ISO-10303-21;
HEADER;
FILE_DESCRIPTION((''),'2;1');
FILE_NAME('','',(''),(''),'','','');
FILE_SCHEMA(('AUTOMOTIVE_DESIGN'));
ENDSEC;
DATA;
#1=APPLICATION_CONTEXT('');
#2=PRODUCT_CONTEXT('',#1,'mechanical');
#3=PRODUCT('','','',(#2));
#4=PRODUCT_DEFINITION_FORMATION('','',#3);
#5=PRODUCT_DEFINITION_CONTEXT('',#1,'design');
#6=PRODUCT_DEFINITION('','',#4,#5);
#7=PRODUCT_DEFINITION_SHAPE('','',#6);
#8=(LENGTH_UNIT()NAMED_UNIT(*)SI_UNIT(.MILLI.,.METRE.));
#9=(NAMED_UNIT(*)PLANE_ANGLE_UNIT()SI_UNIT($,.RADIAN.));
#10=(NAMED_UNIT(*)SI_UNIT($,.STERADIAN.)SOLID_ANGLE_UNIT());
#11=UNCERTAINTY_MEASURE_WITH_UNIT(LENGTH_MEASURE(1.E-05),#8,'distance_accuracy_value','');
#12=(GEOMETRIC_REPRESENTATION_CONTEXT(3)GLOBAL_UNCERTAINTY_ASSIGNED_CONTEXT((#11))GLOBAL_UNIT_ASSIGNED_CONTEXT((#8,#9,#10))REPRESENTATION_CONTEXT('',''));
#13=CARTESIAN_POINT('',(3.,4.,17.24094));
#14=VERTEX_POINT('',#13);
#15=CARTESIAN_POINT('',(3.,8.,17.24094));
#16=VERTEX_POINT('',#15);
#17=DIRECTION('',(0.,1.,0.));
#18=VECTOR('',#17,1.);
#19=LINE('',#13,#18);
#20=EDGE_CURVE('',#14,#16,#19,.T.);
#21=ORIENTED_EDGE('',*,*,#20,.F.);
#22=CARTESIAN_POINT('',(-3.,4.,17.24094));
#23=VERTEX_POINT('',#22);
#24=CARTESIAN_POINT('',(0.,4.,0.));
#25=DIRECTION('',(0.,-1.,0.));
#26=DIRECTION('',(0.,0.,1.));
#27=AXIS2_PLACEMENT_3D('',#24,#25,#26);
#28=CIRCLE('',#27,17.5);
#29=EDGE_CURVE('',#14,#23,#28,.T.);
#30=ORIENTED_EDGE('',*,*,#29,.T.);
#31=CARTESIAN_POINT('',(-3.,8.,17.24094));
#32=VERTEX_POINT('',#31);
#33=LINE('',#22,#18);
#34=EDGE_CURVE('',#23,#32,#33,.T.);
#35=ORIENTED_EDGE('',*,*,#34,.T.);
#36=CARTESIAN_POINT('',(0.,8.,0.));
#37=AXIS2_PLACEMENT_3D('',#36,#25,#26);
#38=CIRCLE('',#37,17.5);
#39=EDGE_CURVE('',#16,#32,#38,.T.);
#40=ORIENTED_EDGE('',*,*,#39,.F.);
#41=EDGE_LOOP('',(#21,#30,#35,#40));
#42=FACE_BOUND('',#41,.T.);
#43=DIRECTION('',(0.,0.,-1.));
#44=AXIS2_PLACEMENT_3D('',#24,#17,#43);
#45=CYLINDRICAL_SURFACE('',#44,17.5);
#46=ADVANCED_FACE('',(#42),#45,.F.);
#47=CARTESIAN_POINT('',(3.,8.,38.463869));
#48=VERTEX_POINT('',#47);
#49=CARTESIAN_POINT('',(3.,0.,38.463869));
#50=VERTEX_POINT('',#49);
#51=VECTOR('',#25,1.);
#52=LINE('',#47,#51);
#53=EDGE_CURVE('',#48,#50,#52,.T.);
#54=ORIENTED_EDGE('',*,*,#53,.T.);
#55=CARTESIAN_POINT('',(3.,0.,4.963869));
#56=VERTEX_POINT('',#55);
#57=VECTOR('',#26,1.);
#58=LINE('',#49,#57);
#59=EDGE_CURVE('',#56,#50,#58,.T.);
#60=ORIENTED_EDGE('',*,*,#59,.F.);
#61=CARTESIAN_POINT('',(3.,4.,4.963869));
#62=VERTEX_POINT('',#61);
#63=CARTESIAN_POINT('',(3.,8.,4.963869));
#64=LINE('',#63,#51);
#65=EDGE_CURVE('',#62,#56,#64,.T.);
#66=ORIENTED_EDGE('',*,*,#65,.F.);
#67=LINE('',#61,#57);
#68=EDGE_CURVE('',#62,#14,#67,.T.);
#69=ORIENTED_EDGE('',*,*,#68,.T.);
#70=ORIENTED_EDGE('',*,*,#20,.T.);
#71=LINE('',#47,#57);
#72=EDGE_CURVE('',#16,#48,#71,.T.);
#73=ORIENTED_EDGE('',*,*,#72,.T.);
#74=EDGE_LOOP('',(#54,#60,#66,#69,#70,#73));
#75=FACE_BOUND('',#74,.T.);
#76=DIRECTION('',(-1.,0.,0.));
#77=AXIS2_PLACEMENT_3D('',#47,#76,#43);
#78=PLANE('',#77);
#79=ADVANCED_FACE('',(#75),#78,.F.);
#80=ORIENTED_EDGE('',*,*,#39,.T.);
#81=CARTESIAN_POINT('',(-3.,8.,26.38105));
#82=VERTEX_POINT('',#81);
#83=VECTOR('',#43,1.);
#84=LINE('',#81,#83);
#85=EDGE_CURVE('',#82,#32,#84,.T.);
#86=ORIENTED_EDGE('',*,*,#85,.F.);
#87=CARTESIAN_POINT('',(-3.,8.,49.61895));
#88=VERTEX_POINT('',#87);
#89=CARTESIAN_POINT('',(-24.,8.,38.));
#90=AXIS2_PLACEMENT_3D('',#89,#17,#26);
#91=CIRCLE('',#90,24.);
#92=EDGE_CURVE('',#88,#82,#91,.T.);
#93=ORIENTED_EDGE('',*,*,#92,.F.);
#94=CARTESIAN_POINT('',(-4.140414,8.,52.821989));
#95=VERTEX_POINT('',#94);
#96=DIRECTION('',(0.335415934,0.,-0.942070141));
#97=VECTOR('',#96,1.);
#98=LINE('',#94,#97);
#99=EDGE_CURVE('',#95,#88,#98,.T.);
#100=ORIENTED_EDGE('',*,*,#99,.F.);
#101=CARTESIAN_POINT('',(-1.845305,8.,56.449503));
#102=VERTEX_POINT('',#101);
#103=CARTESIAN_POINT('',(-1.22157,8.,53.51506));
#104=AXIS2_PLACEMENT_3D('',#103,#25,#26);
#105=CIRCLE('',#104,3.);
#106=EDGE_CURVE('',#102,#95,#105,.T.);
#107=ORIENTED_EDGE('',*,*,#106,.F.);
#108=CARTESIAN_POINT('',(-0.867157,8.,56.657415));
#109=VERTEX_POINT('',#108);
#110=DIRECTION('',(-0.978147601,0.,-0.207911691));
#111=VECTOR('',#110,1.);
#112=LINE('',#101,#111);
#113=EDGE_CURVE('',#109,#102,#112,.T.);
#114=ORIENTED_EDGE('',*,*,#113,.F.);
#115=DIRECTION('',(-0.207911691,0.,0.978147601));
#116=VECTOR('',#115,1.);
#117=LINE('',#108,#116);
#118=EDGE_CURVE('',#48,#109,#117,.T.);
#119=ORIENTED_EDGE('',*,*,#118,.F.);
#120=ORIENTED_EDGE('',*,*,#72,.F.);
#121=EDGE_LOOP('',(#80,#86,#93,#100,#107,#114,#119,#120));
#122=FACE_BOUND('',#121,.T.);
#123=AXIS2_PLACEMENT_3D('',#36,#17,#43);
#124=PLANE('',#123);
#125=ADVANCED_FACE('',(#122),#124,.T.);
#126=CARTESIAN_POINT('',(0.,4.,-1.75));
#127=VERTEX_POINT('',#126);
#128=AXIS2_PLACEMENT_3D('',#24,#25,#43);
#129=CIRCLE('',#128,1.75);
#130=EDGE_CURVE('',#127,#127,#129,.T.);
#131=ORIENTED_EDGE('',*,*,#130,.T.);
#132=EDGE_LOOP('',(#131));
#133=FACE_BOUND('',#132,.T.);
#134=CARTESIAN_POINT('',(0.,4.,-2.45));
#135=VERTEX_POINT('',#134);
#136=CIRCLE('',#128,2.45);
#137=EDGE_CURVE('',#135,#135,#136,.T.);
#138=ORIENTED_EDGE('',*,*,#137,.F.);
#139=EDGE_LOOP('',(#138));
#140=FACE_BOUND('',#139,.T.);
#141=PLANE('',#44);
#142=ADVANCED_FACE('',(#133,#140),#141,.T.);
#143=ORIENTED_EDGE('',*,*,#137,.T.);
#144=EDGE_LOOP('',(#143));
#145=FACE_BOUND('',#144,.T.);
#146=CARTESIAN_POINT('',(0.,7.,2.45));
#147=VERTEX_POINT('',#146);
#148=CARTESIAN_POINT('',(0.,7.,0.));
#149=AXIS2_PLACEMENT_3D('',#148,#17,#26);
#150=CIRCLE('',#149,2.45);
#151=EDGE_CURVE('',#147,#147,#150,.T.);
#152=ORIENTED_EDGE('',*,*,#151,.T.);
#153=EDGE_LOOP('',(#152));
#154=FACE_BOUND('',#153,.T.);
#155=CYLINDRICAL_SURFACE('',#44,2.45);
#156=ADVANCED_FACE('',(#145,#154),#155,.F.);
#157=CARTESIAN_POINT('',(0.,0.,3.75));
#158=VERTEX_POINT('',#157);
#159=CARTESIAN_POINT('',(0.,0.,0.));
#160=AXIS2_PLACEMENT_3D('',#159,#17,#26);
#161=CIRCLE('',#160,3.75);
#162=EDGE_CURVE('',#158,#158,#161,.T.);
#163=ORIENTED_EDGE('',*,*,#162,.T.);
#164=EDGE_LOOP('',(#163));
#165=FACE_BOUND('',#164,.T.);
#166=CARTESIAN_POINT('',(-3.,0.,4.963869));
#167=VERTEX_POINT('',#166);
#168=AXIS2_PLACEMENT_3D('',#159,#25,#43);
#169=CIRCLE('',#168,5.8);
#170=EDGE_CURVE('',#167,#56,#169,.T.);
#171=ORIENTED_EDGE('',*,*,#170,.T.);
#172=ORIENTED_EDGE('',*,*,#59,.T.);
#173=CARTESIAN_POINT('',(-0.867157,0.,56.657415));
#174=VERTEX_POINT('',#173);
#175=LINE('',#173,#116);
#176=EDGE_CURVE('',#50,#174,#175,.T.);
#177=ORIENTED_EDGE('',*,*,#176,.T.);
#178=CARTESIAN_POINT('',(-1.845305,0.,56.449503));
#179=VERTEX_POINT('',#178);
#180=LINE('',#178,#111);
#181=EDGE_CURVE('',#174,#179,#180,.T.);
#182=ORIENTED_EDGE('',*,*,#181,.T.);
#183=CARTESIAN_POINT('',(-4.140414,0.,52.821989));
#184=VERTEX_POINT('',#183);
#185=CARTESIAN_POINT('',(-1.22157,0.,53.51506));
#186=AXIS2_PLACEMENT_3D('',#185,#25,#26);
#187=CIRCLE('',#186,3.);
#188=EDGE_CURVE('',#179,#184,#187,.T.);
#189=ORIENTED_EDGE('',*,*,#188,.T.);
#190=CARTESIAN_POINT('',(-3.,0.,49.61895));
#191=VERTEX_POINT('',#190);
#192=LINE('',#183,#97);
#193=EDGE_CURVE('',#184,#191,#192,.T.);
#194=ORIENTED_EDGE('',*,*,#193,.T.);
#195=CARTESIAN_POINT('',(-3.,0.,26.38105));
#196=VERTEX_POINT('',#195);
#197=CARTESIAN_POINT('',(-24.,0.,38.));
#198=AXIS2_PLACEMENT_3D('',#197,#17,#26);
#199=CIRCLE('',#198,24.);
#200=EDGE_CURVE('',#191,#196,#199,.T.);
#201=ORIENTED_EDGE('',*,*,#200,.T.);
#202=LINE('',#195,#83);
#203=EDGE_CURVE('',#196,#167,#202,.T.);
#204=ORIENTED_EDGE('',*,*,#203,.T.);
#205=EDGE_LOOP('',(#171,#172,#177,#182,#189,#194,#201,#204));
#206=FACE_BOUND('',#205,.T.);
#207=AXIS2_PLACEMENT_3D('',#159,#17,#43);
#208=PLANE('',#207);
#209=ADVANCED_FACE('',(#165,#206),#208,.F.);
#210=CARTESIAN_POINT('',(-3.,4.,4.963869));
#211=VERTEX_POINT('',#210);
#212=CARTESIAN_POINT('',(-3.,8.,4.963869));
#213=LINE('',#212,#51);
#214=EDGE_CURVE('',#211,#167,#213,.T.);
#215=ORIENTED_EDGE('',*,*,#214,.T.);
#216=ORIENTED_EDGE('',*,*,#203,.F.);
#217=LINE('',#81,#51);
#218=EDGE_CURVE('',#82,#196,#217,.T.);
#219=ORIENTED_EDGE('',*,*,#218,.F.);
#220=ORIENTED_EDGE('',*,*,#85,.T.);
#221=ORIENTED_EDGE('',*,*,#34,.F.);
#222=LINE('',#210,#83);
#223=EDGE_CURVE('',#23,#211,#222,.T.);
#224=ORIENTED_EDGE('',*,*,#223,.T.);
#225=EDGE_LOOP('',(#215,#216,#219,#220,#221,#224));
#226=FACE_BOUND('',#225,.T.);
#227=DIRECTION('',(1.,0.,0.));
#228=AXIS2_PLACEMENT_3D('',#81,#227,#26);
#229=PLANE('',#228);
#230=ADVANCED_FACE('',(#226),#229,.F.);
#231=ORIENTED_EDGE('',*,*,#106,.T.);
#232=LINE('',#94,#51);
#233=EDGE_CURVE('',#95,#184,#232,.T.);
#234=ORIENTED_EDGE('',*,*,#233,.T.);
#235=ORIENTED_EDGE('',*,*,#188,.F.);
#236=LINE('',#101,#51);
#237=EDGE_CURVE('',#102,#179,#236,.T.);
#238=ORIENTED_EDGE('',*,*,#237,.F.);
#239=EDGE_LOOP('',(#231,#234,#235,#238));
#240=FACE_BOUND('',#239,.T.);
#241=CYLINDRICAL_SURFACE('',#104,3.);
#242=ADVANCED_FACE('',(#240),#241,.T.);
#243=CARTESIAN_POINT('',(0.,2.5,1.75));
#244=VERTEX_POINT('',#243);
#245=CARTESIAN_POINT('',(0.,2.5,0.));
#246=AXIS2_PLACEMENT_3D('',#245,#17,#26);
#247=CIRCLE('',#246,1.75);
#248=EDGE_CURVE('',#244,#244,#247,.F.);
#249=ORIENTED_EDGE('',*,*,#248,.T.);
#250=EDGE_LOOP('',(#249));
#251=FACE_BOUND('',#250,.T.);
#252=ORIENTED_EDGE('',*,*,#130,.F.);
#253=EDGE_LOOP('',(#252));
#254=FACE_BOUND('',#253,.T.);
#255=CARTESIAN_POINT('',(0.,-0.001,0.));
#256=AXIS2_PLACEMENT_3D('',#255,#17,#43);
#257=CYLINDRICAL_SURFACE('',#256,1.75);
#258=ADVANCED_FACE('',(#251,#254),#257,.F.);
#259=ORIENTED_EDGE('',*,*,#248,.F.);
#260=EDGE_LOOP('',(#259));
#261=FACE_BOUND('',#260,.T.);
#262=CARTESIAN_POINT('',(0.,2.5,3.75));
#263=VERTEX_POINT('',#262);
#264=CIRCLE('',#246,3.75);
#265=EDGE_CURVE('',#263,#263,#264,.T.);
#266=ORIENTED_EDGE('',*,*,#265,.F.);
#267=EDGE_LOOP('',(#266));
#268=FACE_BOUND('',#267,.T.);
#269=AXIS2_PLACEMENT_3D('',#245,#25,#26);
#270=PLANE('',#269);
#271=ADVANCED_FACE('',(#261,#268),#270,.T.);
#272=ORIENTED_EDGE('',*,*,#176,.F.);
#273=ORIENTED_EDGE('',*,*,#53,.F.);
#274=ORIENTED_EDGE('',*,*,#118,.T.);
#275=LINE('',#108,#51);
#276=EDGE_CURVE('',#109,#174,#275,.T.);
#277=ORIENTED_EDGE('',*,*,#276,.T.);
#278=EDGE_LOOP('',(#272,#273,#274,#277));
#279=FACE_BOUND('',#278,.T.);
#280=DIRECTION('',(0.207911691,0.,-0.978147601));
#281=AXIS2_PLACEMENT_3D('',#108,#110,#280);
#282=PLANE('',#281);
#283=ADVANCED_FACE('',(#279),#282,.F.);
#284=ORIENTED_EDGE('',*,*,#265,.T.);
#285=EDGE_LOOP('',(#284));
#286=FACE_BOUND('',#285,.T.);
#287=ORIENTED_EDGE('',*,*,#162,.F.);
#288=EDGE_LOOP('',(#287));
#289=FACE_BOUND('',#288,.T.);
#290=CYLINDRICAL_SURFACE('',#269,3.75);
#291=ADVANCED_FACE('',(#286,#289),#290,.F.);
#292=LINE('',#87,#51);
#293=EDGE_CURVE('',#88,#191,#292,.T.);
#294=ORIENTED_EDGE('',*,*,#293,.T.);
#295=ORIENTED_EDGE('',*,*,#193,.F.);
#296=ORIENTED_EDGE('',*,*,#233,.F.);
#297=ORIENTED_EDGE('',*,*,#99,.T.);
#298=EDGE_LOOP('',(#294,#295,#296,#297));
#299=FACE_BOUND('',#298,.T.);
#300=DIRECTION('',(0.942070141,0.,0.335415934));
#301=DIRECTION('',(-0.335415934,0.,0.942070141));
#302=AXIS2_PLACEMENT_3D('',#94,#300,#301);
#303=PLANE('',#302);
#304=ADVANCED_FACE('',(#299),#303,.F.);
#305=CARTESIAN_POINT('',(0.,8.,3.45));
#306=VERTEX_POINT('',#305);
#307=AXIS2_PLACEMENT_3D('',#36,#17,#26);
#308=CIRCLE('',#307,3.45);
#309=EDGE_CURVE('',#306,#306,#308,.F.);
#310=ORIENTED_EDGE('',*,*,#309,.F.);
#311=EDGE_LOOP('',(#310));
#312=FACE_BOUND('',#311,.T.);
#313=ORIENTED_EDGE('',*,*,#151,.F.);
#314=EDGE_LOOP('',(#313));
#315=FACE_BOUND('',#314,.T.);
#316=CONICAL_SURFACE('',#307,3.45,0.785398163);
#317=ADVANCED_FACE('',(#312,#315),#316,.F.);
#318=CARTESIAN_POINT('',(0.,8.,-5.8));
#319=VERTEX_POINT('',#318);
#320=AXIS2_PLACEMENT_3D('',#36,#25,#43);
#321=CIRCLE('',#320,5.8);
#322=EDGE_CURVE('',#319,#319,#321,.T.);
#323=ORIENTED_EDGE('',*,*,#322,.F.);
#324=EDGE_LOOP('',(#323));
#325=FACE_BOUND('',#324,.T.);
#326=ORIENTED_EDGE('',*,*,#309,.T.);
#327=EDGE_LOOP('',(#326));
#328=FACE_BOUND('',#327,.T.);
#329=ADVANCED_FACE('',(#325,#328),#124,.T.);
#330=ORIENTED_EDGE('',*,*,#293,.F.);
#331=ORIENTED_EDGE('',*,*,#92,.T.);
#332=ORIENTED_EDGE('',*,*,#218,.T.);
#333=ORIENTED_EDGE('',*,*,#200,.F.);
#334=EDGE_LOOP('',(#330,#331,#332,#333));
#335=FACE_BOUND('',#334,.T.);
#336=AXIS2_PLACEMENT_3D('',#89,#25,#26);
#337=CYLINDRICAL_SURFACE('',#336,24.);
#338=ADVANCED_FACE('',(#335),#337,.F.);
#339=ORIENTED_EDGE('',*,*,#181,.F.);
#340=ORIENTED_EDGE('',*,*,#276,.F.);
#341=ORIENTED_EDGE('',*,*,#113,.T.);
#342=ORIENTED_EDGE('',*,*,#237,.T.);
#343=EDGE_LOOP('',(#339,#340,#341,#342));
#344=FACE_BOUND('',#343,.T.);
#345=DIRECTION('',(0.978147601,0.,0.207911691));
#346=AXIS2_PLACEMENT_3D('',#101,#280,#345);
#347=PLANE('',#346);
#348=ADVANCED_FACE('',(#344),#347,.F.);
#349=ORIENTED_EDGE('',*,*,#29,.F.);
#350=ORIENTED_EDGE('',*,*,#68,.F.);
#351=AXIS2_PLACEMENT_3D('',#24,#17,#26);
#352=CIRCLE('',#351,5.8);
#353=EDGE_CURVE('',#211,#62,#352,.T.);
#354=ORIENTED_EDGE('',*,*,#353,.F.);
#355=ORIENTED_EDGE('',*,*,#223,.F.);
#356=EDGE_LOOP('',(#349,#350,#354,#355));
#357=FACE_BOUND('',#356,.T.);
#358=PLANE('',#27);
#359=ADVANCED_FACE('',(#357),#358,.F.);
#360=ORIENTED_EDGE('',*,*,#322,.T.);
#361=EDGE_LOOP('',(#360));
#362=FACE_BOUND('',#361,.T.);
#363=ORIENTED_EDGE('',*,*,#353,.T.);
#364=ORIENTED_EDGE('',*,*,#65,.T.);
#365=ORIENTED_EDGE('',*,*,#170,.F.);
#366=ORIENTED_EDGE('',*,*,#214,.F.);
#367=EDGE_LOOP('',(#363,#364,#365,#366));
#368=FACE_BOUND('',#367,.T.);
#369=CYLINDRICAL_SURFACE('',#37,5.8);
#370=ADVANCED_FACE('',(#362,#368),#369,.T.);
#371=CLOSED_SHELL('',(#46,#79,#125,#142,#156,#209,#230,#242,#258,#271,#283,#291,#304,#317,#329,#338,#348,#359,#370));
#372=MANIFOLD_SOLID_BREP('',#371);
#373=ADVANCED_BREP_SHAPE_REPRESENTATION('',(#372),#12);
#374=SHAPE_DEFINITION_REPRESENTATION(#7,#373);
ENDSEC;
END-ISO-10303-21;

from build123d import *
from build123d.topology import SkipClean

# Parameters (mm, degrees)
BOSS_EXTRU_1_DEPTH             = 8
ESQUISSE2_R                    = 2.45
ENL_V_MAT_EXTRU_1_DEPTH        = 4
ENL_V_MAT_EXTRU_2_REACH        = 59.094
ESQUISSE3_R                    = 1.75
ESQUISSE4_R                    = 3.75
ENL_V_MAT_EXTRU_3_DEPTH        = 2.5
ENL_V_START                    = -4
ENL_V_MAT_EXTRU_4_DEPTH        = 4
CORPS_D_PLACER_COPIER1_DEPTH   = 8
CORPS_D_PLACER_COPIER1_2_DEPTH = 8
CORPS_D_PLACER_COPIER1_3_DEPTH = 4
CHANFREIN1_SIZE                = 1


# Read off the part's stored shape, not the designer's step: Corps-Déplacer/Copier1
with BuildPart() as part:
    # Esquisse1 → Boss.-Extru.1 (new body)
    with BuildSketch(Plane(origin=(0, 0, 0), x_dir=(1, 0, 0), z_dir=(0, 1, 0))):
        with BuildLine():
            Line((-3, 26.381049961), (-3, 4.963869458))
            ThreePointArc((-3, 4.963869458), (0, -5.8), (3, 4.963869458))
            Line((3, 4.963869458), (3, 38.463869458))
            Line((3, 38.463869458), (-0.867157449, 56.657414832))
            Line((-0.867157449, 56.657414832), (-1.84530505, 56.449503141))
            ThreePointArc((-1.84530505, 56.449503141), (-3.756758837, 55.119060789), (-4.140414176, 52.821988519))
            Line((-4.140414176, 52.821988519), (-3, 49.618950039))
            ThreePointArc((-3, 49.618950039), (0, 38), (-3, 26.381049961))
        make_face()
    extrude(amount=BOSS_EXTRU_1_DEPTH)

    # Esquisse2 → Enlèv. mat.-Extru.1 (cut)
    with BuildSketch(Plane(origin=(0, 8, 0), x_dir=(1, 0, 0), z_dir=(0, 1, 0))):
        with Locations(Location((0, 0, 0), (0, 0, 270))):
            Circle(ESQUISSE2_R)
    extrude(amount=-ENL_V_MAT_EXTRU_1_DEPTH, mode=Mode.SUBTRACT)

    # Esquisse3 → Enlèv. mat.-Extru.2 (cut, up to next)
    with BuildSketch(Plane(origin=(0, 4, 0), x_dir=(1, 0, 0), z_dir=(0, 1, 0)), mode=Mode.PRIVATE) as enl_v_mat_extru_2_sk1:
        with Locations(Location((0, 0, 0), (0, 0, 270))):
            Circle(ESQUISSE3_R)
    enl_v_mat_extru_2_tool1 = extrude(enl_v_mat_extru_2_sk1.sketch, amount=-ENL_V_MAT_EXTRU_2_REACH, mode=Mode.PRIVATE) & part.part
    add(enl_v_mat_extru_2_tool1.solids().sort_by_distance((0, 4, 0))[0], mode=Mode.SUBTRACT)

    # Esquisse4 → Enlèv. mat.-Extru.3 (cut)
    with BuildSketch(Plane.XZ):
        with Locations(Location((0, 0, 0), (0, 0, 270))):
            Circle(ESQUISSE4_R)
    extrude(amount=-ENL_V_MAT_EXTRU_3_DEPTH, mode=Mode.SUBTRACT)

    # Esquisse5 → Enlèv. mat.-Extru.4 (cut)
    with BuildSketch(Plane(origin=(0, 8, 0), x_dir=(1, 0, 0), z_dir=(0, 1, 0)).offset(ENL_V_START)):
        with BuildLine():
            Line((-3, 4.963869458), (-3, 17.24093965))
            ThreePointArc((-3, 17.24093965), (0, 17.5), (3, 17.24093965))
            Line((3, 17.24093965), (3, 4.963869458))
            ThreePointArc((3, 4.963869458), (0, 5.8), (-3, 4.963869458))
        make_face()
    extrude(amount=ENL_V_MAT_EXTRU_4_DEPTH, mode=Mode.SUBTRACT)

    # Corps-Déplacer/Copier1 outline → Corps-Déplacer/Copier1 (cut)
    with SkipClean():  # the faces are left unmerged after this step: merging them gives an invalid solid
        with BuildSketch(Plane(origin=(0, 0, 0), x_dir=(1, 0, 0), z_dir=(0, 1, 0))):
            with BuildLine():
                ThreePointArc((-3, 4.963869458), (0, 5.8), (3, 4.963869458))
                Line((3, 4.963869458), (3, 38.463869458))
                Line((3, 38.463869458), (-0.867157449, 56.657414832))
                Line((-0.867157449, 56.657414832), (-1.84530505, 56.449503141))
                ThreePointArc((-1.84530505, 56.449503141), (-3.756758837, 55.119060789), (-4.140414176, 52.821988519))
                Line((-4.140414176, 52.821988519), (-3, 49.618950039))
                ThreePointArc((-3, 49.618950039), (0, 38), (-3, 26.381049961))
                Line((-3, 26.381049961), (-3, 4.963869458))
            make_face()
        extrude(amount=CORPS_D_PLACER_COPIER1_DEPTH, mode=Mode.SUBTRACT)



with BuildPart() as body_2:
    # Corps-D_placer_Copier1 2 outline → Corps-D_placer_Copier1 2 (new body)
    with BuildSketch(Plane(origin=(0, 0, 0), x_dir=(1, 0, 0), z_dir=(0, 1, 0))):
        with BuildLine():
            Line((3, -38.463869458), (3, -17.24093965))
            ThreePointArc((3, -17.24093965), (0, -17.5), (-3, -17.24093965))
            Line((-3, -17.24093965), (-3, -26.381049961))
            ThreePointArc((-3, -26.381049961), (0, -38), (-3, -49.618950039))
            Line((-3, -49.618950039), (-4.140414176, -52.821988519))
            ThreePointArc((-4.140414176, -52.821988519), (-3.756758837, -55.119060789), (-1.84530505, -56.449503141))
            Line((-1.84530505, -56.449503141), (-0.867157449, -56.657414832))
            Line((-0.867157449, -56.657414832), (3, -38.463869458))
        make_face()
    extrude(amount=CORPS_D_PLACER_COPIER1_2_DEPTH)


with BuildPart() as part_1:
    with SkipClean():  # the faces are left unmerged after this step: merging them gives an invalid solid
        add(part.part)

        add(body_2.part)  # Corps-D_placer_Copier1 3 merges body 2
        # Corps-D_placer_Copier1 3 outline → Corps-D_placer_Copier1 3 (add)
        with BuildSketch(Plane(origin=(0, 0, 0), x_dir=(1, 0, 0), z_dir=(0, 1, 0))):
            with BuildLine():
                Line((3, -17.24093965), (3, -4.963869458))
                ThreePointArc((3, -4.963869458), (0, -5.8), (-3, -4.963869458))
                Line((-3, -4.963869458), (-3, -17.24093965))
                ThreePointArc((-3, -17.24093965), (0, -17.5), (3, -17.24093965))
            make_face()
        extrude(amount=CORPS_D_PLACER_COPIER1_3_DEPTH)

    # Chanfrein1
    chanfrein1_edges = [part_1.edges().sort_by_distance(p)[0] for p in [
        (0, 8, -2.45),
    ]]
    chamfer(chanfrein1_edges, length=CHANFREIN1_SIZE)


solid = part_1.part
